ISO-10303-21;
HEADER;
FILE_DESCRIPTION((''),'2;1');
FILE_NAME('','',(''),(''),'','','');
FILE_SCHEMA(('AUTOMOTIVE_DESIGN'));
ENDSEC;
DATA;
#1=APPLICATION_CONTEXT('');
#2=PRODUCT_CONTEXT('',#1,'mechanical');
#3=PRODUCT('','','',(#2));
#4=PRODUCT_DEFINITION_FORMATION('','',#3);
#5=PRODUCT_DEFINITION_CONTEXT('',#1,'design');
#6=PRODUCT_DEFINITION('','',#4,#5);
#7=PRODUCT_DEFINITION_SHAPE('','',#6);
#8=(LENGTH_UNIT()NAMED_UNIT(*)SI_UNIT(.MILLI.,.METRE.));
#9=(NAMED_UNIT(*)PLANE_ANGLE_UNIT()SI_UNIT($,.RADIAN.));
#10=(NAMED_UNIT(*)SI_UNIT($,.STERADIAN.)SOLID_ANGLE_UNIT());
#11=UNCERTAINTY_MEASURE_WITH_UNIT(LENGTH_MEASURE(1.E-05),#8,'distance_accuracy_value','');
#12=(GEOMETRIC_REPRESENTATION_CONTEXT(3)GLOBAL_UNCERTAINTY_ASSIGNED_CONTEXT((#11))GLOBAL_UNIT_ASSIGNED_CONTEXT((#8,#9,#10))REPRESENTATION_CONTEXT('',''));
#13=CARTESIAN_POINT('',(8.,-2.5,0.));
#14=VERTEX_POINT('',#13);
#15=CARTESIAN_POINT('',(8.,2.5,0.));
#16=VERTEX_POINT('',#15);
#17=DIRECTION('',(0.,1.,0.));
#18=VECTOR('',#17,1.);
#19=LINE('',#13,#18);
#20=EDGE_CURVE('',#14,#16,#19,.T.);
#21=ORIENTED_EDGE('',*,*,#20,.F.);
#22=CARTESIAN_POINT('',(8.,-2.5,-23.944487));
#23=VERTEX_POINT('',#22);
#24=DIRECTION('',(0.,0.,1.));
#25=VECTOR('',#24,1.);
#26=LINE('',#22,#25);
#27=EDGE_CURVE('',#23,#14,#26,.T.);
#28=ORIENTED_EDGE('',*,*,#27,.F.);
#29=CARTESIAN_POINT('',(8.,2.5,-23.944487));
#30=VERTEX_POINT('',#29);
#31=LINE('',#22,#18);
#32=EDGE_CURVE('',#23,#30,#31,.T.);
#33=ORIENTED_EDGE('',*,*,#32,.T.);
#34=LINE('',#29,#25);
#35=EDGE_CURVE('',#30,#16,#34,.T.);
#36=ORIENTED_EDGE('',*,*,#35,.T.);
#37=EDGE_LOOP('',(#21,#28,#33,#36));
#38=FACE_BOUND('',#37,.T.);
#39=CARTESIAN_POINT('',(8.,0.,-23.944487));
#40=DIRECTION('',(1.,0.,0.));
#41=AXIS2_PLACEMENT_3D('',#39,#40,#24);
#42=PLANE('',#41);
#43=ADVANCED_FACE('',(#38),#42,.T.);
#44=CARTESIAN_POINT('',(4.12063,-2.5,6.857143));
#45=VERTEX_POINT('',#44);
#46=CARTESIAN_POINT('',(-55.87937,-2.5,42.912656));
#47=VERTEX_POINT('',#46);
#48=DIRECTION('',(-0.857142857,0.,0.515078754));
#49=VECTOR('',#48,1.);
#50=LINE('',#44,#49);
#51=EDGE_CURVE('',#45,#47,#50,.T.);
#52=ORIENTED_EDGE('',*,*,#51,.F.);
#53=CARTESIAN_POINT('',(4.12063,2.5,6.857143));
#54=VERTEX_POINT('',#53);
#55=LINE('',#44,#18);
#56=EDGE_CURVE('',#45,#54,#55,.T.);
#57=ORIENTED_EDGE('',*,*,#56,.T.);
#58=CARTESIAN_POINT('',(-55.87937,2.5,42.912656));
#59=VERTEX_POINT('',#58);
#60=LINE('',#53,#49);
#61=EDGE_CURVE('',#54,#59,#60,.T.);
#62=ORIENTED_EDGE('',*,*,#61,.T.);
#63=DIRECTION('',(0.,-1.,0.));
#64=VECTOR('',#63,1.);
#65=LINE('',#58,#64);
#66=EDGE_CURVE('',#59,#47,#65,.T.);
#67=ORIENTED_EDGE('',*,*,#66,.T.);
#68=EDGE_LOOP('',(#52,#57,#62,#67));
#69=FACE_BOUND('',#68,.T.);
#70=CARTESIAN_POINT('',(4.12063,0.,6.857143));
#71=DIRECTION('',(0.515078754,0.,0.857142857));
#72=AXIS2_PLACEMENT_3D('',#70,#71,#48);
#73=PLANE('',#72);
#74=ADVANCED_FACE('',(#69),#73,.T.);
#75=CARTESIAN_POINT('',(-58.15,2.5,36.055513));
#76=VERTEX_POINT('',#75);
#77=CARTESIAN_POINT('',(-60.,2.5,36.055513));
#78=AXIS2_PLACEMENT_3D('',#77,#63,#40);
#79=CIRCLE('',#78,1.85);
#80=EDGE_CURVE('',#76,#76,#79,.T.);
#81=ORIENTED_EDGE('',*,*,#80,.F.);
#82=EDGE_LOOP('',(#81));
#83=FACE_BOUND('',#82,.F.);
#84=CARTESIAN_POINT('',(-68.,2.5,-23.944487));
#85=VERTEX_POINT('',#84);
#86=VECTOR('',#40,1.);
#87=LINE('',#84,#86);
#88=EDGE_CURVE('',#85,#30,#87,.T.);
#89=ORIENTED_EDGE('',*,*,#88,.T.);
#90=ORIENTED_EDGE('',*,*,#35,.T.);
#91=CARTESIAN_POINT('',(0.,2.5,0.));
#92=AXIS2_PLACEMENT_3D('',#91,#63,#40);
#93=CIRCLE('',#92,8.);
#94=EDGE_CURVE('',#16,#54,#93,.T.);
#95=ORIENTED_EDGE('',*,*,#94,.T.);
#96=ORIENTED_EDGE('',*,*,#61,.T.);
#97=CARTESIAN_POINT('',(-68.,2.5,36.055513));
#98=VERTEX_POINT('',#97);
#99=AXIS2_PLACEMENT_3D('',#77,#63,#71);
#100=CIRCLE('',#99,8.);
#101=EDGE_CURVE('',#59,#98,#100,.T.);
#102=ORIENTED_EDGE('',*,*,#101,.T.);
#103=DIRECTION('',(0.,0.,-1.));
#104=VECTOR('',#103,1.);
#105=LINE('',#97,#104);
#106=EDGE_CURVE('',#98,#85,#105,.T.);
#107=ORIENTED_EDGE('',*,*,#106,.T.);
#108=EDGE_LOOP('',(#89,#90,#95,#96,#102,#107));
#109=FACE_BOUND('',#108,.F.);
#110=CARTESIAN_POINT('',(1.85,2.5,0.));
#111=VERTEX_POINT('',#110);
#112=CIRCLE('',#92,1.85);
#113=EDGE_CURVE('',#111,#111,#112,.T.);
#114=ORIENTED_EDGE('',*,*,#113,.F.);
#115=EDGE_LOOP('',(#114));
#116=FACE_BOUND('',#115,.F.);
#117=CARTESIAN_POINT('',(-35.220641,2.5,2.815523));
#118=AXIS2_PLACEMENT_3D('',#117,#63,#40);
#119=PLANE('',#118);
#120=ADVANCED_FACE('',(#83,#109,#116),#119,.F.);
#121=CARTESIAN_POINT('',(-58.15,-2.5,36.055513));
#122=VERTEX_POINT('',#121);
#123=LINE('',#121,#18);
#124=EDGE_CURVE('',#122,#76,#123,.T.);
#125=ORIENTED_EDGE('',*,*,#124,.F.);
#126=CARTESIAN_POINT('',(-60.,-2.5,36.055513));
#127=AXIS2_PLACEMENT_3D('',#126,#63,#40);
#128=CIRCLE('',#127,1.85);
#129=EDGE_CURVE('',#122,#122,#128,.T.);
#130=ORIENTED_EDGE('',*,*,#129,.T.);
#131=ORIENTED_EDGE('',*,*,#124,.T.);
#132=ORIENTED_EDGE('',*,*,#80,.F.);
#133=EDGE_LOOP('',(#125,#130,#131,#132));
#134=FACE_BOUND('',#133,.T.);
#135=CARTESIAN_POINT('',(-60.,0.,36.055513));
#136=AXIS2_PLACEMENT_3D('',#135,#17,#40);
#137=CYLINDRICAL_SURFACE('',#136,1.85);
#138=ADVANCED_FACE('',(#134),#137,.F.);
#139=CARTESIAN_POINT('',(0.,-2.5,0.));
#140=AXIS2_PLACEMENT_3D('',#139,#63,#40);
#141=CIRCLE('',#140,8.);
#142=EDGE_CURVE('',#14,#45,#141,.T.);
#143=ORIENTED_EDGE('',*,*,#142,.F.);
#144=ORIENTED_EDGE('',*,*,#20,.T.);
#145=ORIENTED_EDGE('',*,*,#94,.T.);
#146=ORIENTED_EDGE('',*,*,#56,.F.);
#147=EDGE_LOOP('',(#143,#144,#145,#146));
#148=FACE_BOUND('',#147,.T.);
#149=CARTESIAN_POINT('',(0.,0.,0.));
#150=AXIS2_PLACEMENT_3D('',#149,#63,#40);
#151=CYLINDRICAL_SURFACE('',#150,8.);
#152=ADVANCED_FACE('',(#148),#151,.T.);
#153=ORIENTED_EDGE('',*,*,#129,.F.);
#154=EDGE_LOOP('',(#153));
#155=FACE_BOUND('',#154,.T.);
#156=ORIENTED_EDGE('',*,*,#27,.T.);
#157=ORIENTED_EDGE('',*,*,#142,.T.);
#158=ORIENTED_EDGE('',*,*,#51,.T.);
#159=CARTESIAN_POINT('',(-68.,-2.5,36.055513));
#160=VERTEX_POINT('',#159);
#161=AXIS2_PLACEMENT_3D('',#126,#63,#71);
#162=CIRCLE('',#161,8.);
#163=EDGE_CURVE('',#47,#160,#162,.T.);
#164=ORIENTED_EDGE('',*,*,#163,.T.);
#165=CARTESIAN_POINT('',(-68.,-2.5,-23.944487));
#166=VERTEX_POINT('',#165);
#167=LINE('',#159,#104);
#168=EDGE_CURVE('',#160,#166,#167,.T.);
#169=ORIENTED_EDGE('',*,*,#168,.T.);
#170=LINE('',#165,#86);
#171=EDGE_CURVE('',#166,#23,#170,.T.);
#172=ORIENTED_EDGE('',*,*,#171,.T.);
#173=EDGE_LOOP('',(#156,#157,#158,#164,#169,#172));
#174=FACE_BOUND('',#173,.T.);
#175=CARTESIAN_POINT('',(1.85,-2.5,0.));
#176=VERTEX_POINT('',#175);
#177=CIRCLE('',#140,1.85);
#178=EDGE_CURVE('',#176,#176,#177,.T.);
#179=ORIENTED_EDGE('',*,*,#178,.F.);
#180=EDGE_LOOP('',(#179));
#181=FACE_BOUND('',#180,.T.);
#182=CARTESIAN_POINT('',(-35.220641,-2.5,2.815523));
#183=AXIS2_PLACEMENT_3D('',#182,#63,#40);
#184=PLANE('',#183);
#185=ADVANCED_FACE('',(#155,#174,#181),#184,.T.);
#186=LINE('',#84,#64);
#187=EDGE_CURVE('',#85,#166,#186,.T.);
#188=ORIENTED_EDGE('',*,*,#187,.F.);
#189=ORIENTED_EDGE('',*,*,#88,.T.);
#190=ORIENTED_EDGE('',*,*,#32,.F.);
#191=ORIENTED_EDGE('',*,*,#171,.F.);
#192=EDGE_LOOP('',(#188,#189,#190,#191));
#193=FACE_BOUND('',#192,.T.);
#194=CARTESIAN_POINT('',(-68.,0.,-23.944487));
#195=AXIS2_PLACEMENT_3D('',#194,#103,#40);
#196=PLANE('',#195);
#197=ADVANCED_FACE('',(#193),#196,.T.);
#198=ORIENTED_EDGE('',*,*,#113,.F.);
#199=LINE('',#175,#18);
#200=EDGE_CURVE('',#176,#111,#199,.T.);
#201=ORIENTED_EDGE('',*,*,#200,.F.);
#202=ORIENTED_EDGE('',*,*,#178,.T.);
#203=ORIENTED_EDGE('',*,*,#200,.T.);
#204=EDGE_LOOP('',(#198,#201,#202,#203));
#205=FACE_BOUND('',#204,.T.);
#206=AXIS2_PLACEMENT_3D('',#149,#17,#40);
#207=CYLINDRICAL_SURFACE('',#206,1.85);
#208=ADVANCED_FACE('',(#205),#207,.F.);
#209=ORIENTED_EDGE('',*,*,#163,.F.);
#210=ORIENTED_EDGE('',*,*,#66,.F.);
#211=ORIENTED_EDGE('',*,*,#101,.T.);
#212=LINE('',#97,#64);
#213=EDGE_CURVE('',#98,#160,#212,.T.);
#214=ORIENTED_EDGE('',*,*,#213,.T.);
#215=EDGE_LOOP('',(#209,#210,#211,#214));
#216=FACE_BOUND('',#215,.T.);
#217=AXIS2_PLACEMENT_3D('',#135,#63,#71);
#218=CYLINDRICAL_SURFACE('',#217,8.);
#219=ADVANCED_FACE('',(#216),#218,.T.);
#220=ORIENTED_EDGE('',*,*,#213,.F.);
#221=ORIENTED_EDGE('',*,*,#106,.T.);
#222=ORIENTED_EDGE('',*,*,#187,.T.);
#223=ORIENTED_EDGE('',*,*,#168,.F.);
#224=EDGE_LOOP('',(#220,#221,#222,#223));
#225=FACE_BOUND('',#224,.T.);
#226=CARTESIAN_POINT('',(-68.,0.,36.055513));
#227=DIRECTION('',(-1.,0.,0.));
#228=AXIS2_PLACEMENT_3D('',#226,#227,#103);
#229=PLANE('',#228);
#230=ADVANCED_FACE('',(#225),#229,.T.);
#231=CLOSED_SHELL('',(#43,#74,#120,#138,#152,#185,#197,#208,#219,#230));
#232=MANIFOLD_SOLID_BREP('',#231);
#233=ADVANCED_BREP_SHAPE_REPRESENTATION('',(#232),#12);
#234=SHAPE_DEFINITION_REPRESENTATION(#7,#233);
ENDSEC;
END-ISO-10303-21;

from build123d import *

# Parameters (mm, degrees)
F0_R     = 1.85
F1_DEPTH = 2.5


# Not quite as in the source:
# - a feature names something its author has since deleted; it is built from what else it names


with BuildPart() as f1:
    # F0 (on Front) → F1 (new body, symmetric)
    with BuildSketch(Plane.XZ):
        with BuildLine():
            Line((4.1206300291, 6.8571428571), (-55.8793699709, 42.9126556118))
            ThreePointArc((-55.8793699709, 42.9126556118), (-63.9392232589, 43.0184517976), (-68, 36.0555127546))
            Line((-68, 36.0555127546), (-68, -23.9444872454))
            Line((-68, -23.9444872454), (8, -23.9444872454))
            Line((8, -23.9444872454), (8, 0))
            ThreePointArc((8, 0), (6.962939043, 3.9392232589), (4.1206300291, 6.8571428571))
        make_face()
        Circle(F0_R, mode=Mode.SUBTRACT)
        with Locations((-60, 36.0555127546)):
            Circle(F0_R, mode=Mode.SUBTRACT)
    extrude(amount=F1_DEPTH, both=True)


solid = f1.part
